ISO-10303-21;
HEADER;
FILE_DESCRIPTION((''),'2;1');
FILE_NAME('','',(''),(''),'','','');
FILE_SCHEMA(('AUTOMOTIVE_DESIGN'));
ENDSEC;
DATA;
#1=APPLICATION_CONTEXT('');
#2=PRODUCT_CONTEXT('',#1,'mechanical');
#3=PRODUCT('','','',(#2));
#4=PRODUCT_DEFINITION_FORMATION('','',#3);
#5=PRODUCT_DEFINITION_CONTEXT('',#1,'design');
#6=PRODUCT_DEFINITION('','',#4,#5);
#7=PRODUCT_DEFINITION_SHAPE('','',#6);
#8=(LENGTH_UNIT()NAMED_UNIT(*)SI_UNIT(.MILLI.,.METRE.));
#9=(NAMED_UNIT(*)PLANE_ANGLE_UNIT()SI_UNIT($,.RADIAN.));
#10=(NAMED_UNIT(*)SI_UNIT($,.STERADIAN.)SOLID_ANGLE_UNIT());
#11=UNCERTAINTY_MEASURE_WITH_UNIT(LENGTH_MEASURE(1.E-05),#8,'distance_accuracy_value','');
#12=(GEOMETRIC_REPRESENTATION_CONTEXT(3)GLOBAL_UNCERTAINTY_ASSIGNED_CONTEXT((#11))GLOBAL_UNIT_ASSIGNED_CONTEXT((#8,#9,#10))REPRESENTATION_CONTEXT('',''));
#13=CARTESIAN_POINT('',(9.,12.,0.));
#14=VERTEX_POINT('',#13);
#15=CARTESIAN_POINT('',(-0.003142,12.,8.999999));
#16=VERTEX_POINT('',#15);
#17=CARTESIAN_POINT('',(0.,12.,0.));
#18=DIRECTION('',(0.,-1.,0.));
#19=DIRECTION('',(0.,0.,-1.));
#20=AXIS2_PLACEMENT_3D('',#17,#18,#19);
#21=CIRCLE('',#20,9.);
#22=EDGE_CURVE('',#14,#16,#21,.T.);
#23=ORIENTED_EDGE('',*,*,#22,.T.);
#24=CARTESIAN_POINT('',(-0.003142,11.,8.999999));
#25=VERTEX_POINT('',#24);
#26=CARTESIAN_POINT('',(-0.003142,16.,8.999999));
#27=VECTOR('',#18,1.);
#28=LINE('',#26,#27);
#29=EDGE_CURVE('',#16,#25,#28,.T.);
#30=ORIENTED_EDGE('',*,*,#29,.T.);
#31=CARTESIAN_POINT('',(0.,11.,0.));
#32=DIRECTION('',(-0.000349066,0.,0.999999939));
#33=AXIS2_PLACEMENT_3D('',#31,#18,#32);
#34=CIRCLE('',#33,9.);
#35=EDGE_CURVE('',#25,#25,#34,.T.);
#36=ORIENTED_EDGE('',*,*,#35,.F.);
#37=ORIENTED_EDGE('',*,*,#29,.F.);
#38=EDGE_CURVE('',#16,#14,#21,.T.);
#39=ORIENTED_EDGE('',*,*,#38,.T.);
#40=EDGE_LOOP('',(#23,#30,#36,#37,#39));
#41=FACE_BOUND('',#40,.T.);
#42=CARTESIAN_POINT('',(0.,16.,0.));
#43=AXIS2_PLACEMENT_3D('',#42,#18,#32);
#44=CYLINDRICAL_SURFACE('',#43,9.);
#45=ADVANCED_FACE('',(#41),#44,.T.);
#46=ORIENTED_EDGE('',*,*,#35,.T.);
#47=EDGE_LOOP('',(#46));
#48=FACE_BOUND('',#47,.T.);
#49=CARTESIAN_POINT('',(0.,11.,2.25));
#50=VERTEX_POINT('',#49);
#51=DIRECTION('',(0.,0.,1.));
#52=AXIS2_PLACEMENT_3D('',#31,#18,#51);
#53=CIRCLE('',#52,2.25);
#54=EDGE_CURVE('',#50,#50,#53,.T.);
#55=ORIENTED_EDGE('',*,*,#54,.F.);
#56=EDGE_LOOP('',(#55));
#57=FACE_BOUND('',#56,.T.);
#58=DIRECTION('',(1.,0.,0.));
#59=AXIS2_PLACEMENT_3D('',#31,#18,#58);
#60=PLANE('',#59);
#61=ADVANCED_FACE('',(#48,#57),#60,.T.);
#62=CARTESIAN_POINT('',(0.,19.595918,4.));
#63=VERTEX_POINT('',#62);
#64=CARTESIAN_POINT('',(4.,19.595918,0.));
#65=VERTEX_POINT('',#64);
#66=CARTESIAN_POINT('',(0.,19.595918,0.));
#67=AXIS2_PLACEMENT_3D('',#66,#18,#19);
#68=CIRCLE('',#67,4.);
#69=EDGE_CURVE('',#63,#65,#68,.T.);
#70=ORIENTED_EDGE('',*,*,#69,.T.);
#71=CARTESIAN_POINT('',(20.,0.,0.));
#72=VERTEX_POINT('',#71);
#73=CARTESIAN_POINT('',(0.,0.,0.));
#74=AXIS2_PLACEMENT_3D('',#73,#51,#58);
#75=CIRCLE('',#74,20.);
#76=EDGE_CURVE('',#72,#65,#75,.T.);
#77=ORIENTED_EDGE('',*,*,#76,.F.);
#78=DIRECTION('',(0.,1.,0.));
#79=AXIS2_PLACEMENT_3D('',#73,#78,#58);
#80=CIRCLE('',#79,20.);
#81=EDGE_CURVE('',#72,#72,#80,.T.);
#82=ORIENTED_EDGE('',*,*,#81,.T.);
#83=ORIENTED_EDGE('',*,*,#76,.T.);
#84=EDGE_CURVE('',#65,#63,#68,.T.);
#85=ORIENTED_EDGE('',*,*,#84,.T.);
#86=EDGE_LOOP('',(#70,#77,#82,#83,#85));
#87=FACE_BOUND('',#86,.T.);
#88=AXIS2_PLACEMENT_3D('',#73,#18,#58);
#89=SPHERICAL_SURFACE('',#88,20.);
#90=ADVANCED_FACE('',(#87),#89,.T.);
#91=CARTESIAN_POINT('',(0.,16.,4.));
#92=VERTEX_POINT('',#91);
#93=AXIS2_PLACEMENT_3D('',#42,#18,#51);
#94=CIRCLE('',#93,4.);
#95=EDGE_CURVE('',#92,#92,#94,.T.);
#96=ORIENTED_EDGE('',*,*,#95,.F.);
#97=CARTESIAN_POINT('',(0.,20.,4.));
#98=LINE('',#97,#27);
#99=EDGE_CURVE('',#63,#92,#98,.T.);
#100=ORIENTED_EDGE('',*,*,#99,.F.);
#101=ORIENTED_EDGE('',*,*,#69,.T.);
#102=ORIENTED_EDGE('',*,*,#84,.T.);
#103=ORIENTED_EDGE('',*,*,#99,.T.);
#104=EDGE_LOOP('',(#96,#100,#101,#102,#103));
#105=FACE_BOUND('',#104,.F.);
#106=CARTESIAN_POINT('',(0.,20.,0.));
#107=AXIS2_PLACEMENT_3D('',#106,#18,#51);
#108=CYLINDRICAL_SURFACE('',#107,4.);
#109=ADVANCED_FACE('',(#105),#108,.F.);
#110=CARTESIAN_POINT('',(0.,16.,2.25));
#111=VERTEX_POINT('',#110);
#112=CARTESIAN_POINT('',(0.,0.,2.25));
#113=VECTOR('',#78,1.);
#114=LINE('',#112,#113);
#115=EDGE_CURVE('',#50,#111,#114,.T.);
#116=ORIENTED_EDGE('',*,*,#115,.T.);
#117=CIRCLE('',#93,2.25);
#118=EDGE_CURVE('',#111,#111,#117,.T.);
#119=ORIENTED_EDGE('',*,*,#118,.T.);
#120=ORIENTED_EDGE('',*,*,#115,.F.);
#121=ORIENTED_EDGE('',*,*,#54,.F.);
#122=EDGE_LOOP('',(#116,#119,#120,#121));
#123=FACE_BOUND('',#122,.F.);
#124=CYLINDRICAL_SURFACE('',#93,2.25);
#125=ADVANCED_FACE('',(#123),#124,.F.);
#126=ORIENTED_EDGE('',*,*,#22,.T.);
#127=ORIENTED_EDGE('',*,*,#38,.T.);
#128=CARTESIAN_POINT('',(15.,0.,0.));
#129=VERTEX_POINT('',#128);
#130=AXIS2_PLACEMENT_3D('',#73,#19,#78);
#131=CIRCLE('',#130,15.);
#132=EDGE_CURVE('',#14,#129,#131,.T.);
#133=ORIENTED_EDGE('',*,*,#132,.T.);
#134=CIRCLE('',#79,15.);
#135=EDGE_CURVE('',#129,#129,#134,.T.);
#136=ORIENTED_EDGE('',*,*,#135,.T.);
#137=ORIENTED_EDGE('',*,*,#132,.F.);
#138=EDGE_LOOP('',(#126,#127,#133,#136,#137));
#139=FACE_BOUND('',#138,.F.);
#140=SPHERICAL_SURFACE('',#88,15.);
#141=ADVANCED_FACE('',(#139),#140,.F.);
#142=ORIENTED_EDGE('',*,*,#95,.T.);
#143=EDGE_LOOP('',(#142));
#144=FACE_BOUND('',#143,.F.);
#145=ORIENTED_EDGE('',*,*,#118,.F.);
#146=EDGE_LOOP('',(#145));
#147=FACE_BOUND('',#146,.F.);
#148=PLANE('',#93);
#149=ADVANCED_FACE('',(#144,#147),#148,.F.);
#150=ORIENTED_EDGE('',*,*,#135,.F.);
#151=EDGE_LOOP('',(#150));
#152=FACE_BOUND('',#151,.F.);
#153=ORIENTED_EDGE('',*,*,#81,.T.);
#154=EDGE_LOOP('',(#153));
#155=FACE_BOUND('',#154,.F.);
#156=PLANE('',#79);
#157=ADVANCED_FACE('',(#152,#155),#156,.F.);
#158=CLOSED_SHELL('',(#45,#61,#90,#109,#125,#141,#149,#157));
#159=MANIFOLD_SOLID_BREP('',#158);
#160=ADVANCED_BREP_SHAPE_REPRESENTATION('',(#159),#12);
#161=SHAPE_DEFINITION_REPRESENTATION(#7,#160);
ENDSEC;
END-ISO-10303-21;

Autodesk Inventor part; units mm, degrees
ref_plane "YZ Plane" through (0, 0, 0) normal (1, 0, 0) x (0, 1, 0)
ref_plane "XY Plane" through (0, 0, 0) normal (0, 0, 1) x (1, 0, 0)
sketch "Sketch1" plane through (0, 0, 0) normal (0, 0, 1) x (1, 0, 0)
  line L0 (0, 0) -> (0, 20)
  line L1 (0, 0) -> (20, 0)
  arc A0 (20, 0) -> (0, 20) centre (0, 0) ccw
  line L2 (0, -4.828427) -> (0, 28.970563)
  dimension "d2" = 20
sketch "Sketch1 outline for Revolution1" plane through (0, 0, 0) normal (0, 0, 1) x (1, 0, 0)
  line L0 (0, 0) -> (0, 20)
  arc A0 (0, 20) -> (20, 0) centre (0, 0) cw
  line L1 (20, 0) -> (0, 0)
revolve "Revolution1" add sketch "Sketch1 outline for Revolution1" angle 360 about axis through (0, -10, 0) along (0, 1, 0)
ref_plane "Work Plane1" through (0, 20, 0) normal (0, 1, 0) x (-1, 0, 0)
sketch "Sketch2" plane through (0, 20, 0) normal (0, 1, 0) x (-1, 0, 0)
  point P0 (0, 0)
  point P1 (0, 0)
hole "Hole1" at (0, 20, 0) direction (0, -1, 0) diameter 4.5 end through all counterbore diameter 8 counterbore depth 4 clearance for "Socket Head Cap Screw" size "M4" standard "Ansi Metric M Profile"
shell "Shell1" thickness 5 removed faces 1 at (13.884144, 0, 1.68584)
sketch "Sketch3" plane through (0, 0, 0) normal (0, -1, 0) x (1, 0, 0)
  circle A0 centre (0, 0) radius 7.25 projected
  circle A1 centre (0, 0) radius 2.25 projected
sketch "Sketch3 outline for Extrusion1" plane through (0, 0, 0) normal (0, -1, 0) x (1, 0, 0)
  circle A0 centre (0, 0) radius 7.25
  circle A1 centre (0, 0) radius 2.25
extrude "Extrusion1" cut sketch "Sketch3 outline for Extrusion1" against normal up to surface (11 mm away)
properties part number "Ball_Upper Half" material "Nylon 6/6"
